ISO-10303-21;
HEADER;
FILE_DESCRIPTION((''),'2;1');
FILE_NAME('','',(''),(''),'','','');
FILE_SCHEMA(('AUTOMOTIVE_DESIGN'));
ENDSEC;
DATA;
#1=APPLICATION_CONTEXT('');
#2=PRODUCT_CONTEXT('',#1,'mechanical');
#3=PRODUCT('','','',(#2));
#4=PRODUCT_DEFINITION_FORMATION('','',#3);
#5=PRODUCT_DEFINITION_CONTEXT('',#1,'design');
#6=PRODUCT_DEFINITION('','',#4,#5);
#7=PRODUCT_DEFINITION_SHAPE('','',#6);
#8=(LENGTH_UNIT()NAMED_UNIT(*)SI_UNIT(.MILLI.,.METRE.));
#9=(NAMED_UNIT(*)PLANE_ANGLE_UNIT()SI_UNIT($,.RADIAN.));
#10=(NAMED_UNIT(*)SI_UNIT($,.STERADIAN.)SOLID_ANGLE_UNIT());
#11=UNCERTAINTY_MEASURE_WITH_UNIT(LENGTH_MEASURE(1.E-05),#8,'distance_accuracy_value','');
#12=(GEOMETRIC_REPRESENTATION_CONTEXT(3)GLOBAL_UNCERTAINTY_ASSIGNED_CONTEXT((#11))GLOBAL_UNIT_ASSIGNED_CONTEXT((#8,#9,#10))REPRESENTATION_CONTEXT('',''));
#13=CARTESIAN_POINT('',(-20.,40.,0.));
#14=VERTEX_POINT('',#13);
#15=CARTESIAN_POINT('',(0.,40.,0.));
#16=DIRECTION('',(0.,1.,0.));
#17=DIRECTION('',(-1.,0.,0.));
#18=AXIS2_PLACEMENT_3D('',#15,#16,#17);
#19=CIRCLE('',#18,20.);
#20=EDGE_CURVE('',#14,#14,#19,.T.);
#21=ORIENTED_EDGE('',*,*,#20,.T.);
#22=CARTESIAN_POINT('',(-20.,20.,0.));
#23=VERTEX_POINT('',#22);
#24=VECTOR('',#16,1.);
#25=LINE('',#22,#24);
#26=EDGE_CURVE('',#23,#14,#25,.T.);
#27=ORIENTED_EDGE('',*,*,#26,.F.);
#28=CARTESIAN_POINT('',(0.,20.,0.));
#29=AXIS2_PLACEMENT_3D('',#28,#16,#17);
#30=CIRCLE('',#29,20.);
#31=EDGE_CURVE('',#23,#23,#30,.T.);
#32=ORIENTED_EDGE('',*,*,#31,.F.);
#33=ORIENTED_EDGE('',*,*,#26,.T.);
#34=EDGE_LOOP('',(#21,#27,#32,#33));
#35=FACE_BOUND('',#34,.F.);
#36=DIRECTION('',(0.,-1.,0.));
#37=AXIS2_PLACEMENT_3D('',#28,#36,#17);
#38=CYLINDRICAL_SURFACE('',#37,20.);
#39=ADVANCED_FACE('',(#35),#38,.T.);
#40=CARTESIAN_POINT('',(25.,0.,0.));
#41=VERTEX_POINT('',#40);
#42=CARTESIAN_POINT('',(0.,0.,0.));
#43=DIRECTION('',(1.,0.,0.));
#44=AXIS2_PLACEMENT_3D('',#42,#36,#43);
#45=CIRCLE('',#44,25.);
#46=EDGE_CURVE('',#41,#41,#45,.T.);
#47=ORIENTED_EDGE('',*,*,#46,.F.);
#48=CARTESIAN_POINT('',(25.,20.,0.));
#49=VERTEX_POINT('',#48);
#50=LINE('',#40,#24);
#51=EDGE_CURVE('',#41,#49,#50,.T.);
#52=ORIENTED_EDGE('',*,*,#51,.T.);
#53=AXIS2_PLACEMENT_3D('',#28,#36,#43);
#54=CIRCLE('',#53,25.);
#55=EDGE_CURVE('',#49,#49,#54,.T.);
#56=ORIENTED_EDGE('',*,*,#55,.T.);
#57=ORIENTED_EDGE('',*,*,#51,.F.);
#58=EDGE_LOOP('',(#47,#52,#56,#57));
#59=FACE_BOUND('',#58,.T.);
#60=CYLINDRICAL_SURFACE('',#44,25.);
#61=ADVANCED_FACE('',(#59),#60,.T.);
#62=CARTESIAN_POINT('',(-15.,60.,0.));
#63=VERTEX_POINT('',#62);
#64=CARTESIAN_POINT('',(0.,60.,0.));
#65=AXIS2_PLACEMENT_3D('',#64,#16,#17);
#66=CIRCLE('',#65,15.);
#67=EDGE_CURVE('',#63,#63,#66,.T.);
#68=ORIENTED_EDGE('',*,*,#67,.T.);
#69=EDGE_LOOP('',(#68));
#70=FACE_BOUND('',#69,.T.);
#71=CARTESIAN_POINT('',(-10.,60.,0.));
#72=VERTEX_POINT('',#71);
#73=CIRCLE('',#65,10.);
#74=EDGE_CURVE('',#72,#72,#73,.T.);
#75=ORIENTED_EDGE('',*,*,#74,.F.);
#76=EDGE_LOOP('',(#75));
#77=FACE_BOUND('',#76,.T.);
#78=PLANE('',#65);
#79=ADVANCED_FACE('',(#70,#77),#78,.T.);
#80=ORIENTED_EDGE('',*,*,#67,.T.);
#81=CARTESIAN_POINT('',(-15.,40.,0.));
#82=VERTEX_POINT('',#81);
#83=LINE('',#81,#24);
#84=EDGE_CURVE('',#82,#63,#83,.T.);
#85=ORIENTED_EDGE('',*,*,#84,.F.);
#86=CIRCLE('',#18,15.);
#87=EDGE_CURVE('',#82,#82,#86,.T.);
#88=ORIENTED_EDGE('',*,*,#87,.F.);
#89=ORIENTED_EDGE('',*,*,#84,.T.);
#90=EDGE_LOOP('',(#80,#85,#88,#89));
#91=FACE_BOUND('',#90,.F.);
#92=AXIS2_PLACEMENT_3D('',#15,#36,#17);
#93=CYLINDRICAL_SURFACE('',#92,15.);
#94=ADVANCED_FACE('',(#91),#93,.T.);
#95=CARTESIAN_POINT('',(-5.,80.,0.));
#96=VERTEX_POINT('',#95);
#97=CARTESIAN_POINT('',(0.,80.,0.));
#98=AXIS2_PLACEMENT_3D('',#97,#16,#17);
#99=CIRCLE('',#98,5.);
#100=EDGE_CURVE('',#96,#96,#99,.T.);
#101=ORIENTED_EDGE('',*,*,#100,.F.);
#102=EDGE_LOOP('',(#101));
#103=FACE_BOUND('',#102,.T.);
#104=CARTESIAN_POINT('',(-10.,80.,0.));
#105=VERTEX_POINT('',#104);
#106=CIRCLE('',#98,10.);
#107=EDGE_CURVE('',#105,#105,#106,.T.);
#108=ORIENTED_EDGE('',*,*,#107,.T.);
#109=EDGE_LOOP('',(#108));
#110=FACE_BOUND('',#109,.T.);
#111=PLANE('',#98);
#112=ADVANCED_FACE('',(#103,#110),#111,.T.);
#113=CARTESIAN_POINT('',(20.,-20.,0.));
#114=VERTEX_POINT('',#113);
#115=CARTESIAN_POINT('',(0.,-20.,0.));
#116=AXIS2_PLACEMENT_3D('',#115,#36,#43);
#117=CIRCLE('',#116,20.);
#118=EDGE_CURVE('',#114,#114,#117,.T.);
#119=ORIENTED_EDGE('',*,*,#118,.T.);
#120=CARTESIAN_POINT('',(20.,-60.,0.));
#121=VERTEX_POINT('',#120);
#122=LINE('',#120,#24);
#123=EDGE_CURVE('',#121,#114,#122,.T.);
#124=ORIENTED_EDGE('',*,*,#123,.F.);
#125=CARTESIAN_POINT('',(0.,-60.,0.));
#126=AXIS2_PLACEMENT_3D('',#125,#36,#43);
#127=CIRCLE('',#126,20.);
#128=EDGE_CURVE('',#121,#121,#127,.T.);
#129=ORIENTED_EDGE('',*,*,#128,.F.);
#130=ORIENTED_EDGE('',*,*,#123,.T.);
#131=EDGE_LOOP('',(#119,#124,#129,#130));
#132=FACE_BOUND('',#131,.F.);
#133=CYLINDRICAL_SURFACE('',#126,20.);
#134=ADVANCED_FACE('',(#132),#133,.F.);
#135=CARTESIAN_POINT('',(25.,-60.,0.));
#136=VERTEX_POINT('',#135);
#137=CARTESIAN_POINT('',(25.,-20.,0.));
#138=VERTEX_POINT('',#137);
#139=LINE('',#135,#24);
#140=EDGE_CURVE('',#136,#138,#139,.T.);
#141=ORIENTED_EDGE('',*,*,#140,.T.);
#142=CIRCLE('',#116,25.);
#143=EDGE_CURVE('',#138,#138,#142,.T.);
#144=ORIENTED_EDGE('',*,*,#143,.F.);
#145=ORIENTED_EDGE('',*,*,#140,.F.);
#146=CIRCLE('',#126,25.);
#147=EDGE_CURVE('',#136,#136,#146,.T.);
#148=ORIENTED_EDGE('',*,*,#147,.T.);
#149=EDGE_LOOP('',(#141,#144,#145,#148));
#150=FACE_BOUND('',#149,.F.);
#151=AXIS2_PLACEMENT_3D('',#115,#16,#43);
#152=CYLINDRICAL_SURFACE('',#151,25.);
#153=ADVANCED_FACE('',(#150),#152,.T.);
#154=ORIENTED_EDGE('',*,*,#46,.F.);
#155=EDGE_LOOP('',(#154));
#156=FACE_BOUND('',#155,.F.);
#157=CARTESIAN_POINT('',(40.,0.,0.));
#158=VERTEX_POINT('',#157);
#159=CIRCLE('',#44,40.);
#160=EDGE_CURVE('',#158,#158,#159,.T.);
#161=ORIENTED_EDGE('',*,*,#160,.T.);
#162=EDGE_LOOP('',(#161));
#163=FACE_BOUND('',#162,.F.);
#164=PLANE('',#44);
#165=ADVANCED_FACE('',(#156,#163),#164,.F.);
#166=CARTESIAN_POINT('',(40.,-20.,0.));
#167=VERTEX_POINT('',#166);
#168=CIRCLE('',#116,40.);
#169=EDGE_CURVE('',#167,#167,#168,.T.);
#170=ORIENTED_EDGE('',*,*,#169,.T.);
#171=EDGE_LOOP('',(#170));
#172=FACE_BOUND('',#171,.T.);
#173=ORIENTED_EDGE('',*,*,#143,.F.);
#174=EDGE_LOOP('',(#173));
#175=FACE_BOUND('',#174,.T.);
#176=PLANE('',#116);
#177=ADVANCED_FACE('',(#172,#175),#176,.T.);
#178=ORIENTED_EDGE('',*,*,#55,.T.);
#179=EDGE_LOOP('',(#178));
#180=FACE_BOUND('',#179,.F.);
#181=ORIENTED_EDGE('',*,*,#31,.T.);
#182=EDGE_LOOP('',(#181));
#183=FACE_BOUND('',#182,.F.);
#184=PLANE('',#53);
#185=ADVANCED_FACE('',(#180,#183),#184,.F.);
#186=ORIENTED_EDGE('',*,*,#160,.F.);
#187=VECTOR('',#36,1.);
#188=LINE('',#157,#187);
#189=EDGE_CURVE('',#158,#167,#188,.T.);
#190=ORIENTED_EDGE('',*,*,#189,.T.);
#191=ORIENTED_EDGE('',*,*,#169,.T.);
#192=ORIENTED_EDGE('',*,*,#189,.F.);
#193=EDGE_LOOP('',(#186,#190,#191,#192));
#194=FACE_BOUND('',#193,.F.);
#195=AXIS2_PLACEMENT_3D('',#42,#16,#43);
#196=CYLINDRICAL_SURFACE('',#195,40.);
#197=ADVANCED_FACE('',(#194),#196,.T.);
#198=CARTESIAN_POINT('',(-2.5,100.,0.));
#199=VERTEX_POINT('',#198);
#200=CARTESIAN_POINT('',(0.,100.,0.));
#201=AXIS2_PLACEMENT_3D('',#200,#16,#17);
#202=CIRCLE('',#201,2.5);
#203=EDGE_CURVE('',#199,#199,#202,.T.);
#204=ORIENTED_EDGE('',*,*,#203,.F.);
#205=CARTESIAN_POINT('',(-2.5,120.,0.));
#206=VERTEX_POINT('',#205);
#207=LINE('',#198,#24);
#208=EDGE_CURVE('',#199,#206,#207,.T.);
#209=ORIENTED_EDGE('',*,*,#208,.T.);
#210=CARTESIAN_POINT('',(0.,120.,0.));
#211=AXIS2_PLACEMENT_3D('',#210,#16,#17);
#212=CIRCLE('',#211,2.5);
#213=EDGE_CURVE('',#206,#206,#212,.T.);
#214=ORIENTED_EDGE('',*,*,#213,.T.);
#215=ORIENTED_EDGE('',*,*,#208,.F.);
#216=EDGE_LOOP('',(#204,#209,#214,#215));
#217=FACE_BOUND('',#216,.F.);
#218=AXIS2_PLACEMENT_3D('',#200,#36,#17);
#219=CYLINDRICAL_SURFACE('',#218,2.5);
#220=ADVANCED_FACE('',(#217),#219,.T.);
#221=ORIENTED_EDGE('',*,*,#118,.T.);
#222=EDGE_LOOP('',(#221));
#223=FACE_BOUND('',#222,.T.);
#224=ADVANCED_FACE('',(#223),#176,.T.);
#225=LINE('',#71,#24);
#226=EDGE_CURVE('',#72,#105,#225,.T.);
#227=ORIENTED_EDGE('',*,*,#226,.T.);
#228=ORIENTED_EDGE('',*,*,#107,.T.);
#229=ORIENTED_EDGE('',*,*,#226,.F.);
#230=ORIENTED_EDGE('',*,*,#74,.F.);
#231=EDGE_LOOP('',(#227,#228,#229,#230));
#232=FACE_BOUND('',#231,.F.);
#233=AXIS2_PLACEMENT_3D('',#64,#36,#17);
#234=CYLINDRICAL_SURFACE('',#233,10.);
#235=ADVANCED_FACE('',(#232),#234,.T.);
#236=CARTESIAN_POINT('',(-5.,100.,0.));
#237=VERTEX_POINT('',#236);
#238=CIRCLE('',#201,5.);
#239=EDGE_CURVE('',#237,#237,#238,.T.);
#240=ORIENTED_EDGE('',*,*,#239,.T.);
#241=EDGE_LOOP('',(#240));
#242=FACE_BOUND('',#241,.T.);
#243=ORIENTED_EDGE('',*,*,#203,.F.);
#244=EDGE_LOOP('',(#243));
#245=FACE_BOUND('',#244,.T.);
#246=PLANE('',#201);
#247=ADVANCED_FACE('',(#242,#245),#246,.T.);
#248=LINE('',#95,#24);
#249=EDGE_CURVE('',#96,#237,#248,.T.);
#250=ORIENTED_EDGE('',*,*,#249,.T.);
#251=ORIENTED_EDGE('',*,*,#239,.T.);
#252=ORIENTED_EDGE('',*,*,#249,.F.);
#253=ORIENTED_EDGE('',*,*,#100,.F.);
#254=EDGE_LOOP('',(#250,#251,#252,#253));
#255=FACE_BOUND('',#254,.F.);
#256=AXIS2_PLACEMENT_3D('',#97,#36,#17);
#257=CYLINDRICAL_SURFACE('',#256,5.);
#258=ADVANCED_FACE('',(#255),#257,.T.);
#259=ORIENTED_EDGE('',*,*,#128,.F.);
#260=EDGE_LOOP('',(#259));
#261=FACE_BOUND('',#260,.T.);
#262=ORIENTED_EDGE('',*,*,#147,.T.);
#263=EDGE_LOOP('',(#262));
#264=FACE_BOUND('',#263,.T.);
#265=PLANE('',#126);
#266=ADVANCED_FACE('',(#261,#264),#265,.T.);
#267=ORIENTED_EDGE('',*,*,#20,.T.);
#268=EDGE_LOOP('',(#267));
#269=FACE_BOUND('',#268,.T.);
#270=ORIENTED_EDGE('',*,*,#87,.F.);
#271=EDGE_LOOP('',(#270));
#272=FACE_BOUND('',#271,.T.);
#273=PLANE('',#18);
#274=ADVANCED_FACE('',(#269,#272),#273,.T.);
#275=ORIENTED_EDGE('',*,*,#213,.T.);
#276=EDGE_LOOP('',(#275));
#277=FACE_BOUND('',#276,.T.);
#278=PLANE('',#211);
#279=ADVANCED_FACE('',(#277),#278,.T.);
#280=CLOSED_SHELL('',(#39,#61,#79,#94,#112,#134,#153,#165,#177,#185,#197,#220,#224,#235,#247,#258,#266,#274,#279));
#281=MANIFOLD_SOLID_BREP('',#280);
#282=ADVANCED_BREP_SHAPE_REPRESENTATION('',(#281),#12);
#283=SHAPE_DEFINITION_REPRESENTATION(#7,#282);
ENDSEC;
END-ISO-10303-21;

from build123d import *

# Parameters (mm, degrees)
F0_R      = 40
F1_DEPTH  = 20
F2_R      = 25
F5_DEPTH  = 40
F3_R      = 25
F6_DEPTH  = 25.4
F7_DEPTH  = 20
F8_R      = 20
F9_DEPTH  = 20
F10_R     = 15
F11_DEPTH = 20
F12_R     = 10
F13_DEPTH = 20
F14_R     = 5
F15_DEPTH = 20
F16_R     = 2.5
F17_DEPTH = 20
F18_R     = 20
F19_DEPTH = 40


# Not quite as in the source:
# - the program builds the solid bodies; features that only make, move or delete a surface that nothing else refers to are left out


with BuildPart() as f1:
    # F0 (on Front) → F1 (new body)
    with BuildSketch(Plane.XZ):
        Circle(F0_R)
    extrude(amount=F1_DEPTH)

    # F2 (on face) → F5 (join)
    with BuildSketch(Plane.XZ.offset(20)):
        Circle(F2_R)
    extrude(amount=F5_DEPTH)

    # F3 (on face) → F6 (join)
    with BuildSketch(Plane.XZ):
        Circle(F3_R)
    extrude(amount=F6_DEPTH)

    # F3 (on face) → F7 (join)
    with BuildSketch(Plane.XZ):
        Circle(F3_R)
    extrude(amount=-F7_DEPTH)

    # F8 (on face) → F9 (join)
    with BuildSketch(Plane(origin=(0, 20, 0), x_dir=(-1, 0, 0), z_dir=(0, 1, 0))):
        Circle(F8_R)
    extrude(amount=F9_DEPTH)

    # F10 (on face) → F11 (join)
    with BuildSketch(Plane(origin=(0, 40, 0), x_dir=(-1, 0, 0), z_dir=(0, 1, 0))):
        Circle(F10_R)
    extrude(amount=F11_DEPTH)

    # F12 (on face) → F13 (join)
    with BuildSketch(Plane(origin=(0, 60, 0), x_dir=(-1, 0, 0), z_dir=(0, 1, 0))):
        Circle(F12_R)
    extrude(amount=F13_DEPTH)

    # F14 (on face) → F15 (join)
    with BuildSketch(Plane(origin=(0, 80, 0), x_dir=(-1, 0, 0), z_dir=(0, 1, 0))):
        Circle(F14_R)
    extrude(amount=F15_DEPTH)

    # F16 (on face) → F17 (join)
    with BuildSketch(Plane(origin=(0, 100, 0), x_dir=(-1, 0, 0), z_dir=(0, 1, 0))):
        Circle(F16_R)
    extrude(amount=F17_DEPTH)

    # F18 (on face) → F19 (cut)
    with BuildSketch(Plane.XZ.offset(60)):
        Circle(F18_R)
    extrude(amount=-F19_DEPTH, mode=Mode.SUBTRACT)


solid = f1.part
